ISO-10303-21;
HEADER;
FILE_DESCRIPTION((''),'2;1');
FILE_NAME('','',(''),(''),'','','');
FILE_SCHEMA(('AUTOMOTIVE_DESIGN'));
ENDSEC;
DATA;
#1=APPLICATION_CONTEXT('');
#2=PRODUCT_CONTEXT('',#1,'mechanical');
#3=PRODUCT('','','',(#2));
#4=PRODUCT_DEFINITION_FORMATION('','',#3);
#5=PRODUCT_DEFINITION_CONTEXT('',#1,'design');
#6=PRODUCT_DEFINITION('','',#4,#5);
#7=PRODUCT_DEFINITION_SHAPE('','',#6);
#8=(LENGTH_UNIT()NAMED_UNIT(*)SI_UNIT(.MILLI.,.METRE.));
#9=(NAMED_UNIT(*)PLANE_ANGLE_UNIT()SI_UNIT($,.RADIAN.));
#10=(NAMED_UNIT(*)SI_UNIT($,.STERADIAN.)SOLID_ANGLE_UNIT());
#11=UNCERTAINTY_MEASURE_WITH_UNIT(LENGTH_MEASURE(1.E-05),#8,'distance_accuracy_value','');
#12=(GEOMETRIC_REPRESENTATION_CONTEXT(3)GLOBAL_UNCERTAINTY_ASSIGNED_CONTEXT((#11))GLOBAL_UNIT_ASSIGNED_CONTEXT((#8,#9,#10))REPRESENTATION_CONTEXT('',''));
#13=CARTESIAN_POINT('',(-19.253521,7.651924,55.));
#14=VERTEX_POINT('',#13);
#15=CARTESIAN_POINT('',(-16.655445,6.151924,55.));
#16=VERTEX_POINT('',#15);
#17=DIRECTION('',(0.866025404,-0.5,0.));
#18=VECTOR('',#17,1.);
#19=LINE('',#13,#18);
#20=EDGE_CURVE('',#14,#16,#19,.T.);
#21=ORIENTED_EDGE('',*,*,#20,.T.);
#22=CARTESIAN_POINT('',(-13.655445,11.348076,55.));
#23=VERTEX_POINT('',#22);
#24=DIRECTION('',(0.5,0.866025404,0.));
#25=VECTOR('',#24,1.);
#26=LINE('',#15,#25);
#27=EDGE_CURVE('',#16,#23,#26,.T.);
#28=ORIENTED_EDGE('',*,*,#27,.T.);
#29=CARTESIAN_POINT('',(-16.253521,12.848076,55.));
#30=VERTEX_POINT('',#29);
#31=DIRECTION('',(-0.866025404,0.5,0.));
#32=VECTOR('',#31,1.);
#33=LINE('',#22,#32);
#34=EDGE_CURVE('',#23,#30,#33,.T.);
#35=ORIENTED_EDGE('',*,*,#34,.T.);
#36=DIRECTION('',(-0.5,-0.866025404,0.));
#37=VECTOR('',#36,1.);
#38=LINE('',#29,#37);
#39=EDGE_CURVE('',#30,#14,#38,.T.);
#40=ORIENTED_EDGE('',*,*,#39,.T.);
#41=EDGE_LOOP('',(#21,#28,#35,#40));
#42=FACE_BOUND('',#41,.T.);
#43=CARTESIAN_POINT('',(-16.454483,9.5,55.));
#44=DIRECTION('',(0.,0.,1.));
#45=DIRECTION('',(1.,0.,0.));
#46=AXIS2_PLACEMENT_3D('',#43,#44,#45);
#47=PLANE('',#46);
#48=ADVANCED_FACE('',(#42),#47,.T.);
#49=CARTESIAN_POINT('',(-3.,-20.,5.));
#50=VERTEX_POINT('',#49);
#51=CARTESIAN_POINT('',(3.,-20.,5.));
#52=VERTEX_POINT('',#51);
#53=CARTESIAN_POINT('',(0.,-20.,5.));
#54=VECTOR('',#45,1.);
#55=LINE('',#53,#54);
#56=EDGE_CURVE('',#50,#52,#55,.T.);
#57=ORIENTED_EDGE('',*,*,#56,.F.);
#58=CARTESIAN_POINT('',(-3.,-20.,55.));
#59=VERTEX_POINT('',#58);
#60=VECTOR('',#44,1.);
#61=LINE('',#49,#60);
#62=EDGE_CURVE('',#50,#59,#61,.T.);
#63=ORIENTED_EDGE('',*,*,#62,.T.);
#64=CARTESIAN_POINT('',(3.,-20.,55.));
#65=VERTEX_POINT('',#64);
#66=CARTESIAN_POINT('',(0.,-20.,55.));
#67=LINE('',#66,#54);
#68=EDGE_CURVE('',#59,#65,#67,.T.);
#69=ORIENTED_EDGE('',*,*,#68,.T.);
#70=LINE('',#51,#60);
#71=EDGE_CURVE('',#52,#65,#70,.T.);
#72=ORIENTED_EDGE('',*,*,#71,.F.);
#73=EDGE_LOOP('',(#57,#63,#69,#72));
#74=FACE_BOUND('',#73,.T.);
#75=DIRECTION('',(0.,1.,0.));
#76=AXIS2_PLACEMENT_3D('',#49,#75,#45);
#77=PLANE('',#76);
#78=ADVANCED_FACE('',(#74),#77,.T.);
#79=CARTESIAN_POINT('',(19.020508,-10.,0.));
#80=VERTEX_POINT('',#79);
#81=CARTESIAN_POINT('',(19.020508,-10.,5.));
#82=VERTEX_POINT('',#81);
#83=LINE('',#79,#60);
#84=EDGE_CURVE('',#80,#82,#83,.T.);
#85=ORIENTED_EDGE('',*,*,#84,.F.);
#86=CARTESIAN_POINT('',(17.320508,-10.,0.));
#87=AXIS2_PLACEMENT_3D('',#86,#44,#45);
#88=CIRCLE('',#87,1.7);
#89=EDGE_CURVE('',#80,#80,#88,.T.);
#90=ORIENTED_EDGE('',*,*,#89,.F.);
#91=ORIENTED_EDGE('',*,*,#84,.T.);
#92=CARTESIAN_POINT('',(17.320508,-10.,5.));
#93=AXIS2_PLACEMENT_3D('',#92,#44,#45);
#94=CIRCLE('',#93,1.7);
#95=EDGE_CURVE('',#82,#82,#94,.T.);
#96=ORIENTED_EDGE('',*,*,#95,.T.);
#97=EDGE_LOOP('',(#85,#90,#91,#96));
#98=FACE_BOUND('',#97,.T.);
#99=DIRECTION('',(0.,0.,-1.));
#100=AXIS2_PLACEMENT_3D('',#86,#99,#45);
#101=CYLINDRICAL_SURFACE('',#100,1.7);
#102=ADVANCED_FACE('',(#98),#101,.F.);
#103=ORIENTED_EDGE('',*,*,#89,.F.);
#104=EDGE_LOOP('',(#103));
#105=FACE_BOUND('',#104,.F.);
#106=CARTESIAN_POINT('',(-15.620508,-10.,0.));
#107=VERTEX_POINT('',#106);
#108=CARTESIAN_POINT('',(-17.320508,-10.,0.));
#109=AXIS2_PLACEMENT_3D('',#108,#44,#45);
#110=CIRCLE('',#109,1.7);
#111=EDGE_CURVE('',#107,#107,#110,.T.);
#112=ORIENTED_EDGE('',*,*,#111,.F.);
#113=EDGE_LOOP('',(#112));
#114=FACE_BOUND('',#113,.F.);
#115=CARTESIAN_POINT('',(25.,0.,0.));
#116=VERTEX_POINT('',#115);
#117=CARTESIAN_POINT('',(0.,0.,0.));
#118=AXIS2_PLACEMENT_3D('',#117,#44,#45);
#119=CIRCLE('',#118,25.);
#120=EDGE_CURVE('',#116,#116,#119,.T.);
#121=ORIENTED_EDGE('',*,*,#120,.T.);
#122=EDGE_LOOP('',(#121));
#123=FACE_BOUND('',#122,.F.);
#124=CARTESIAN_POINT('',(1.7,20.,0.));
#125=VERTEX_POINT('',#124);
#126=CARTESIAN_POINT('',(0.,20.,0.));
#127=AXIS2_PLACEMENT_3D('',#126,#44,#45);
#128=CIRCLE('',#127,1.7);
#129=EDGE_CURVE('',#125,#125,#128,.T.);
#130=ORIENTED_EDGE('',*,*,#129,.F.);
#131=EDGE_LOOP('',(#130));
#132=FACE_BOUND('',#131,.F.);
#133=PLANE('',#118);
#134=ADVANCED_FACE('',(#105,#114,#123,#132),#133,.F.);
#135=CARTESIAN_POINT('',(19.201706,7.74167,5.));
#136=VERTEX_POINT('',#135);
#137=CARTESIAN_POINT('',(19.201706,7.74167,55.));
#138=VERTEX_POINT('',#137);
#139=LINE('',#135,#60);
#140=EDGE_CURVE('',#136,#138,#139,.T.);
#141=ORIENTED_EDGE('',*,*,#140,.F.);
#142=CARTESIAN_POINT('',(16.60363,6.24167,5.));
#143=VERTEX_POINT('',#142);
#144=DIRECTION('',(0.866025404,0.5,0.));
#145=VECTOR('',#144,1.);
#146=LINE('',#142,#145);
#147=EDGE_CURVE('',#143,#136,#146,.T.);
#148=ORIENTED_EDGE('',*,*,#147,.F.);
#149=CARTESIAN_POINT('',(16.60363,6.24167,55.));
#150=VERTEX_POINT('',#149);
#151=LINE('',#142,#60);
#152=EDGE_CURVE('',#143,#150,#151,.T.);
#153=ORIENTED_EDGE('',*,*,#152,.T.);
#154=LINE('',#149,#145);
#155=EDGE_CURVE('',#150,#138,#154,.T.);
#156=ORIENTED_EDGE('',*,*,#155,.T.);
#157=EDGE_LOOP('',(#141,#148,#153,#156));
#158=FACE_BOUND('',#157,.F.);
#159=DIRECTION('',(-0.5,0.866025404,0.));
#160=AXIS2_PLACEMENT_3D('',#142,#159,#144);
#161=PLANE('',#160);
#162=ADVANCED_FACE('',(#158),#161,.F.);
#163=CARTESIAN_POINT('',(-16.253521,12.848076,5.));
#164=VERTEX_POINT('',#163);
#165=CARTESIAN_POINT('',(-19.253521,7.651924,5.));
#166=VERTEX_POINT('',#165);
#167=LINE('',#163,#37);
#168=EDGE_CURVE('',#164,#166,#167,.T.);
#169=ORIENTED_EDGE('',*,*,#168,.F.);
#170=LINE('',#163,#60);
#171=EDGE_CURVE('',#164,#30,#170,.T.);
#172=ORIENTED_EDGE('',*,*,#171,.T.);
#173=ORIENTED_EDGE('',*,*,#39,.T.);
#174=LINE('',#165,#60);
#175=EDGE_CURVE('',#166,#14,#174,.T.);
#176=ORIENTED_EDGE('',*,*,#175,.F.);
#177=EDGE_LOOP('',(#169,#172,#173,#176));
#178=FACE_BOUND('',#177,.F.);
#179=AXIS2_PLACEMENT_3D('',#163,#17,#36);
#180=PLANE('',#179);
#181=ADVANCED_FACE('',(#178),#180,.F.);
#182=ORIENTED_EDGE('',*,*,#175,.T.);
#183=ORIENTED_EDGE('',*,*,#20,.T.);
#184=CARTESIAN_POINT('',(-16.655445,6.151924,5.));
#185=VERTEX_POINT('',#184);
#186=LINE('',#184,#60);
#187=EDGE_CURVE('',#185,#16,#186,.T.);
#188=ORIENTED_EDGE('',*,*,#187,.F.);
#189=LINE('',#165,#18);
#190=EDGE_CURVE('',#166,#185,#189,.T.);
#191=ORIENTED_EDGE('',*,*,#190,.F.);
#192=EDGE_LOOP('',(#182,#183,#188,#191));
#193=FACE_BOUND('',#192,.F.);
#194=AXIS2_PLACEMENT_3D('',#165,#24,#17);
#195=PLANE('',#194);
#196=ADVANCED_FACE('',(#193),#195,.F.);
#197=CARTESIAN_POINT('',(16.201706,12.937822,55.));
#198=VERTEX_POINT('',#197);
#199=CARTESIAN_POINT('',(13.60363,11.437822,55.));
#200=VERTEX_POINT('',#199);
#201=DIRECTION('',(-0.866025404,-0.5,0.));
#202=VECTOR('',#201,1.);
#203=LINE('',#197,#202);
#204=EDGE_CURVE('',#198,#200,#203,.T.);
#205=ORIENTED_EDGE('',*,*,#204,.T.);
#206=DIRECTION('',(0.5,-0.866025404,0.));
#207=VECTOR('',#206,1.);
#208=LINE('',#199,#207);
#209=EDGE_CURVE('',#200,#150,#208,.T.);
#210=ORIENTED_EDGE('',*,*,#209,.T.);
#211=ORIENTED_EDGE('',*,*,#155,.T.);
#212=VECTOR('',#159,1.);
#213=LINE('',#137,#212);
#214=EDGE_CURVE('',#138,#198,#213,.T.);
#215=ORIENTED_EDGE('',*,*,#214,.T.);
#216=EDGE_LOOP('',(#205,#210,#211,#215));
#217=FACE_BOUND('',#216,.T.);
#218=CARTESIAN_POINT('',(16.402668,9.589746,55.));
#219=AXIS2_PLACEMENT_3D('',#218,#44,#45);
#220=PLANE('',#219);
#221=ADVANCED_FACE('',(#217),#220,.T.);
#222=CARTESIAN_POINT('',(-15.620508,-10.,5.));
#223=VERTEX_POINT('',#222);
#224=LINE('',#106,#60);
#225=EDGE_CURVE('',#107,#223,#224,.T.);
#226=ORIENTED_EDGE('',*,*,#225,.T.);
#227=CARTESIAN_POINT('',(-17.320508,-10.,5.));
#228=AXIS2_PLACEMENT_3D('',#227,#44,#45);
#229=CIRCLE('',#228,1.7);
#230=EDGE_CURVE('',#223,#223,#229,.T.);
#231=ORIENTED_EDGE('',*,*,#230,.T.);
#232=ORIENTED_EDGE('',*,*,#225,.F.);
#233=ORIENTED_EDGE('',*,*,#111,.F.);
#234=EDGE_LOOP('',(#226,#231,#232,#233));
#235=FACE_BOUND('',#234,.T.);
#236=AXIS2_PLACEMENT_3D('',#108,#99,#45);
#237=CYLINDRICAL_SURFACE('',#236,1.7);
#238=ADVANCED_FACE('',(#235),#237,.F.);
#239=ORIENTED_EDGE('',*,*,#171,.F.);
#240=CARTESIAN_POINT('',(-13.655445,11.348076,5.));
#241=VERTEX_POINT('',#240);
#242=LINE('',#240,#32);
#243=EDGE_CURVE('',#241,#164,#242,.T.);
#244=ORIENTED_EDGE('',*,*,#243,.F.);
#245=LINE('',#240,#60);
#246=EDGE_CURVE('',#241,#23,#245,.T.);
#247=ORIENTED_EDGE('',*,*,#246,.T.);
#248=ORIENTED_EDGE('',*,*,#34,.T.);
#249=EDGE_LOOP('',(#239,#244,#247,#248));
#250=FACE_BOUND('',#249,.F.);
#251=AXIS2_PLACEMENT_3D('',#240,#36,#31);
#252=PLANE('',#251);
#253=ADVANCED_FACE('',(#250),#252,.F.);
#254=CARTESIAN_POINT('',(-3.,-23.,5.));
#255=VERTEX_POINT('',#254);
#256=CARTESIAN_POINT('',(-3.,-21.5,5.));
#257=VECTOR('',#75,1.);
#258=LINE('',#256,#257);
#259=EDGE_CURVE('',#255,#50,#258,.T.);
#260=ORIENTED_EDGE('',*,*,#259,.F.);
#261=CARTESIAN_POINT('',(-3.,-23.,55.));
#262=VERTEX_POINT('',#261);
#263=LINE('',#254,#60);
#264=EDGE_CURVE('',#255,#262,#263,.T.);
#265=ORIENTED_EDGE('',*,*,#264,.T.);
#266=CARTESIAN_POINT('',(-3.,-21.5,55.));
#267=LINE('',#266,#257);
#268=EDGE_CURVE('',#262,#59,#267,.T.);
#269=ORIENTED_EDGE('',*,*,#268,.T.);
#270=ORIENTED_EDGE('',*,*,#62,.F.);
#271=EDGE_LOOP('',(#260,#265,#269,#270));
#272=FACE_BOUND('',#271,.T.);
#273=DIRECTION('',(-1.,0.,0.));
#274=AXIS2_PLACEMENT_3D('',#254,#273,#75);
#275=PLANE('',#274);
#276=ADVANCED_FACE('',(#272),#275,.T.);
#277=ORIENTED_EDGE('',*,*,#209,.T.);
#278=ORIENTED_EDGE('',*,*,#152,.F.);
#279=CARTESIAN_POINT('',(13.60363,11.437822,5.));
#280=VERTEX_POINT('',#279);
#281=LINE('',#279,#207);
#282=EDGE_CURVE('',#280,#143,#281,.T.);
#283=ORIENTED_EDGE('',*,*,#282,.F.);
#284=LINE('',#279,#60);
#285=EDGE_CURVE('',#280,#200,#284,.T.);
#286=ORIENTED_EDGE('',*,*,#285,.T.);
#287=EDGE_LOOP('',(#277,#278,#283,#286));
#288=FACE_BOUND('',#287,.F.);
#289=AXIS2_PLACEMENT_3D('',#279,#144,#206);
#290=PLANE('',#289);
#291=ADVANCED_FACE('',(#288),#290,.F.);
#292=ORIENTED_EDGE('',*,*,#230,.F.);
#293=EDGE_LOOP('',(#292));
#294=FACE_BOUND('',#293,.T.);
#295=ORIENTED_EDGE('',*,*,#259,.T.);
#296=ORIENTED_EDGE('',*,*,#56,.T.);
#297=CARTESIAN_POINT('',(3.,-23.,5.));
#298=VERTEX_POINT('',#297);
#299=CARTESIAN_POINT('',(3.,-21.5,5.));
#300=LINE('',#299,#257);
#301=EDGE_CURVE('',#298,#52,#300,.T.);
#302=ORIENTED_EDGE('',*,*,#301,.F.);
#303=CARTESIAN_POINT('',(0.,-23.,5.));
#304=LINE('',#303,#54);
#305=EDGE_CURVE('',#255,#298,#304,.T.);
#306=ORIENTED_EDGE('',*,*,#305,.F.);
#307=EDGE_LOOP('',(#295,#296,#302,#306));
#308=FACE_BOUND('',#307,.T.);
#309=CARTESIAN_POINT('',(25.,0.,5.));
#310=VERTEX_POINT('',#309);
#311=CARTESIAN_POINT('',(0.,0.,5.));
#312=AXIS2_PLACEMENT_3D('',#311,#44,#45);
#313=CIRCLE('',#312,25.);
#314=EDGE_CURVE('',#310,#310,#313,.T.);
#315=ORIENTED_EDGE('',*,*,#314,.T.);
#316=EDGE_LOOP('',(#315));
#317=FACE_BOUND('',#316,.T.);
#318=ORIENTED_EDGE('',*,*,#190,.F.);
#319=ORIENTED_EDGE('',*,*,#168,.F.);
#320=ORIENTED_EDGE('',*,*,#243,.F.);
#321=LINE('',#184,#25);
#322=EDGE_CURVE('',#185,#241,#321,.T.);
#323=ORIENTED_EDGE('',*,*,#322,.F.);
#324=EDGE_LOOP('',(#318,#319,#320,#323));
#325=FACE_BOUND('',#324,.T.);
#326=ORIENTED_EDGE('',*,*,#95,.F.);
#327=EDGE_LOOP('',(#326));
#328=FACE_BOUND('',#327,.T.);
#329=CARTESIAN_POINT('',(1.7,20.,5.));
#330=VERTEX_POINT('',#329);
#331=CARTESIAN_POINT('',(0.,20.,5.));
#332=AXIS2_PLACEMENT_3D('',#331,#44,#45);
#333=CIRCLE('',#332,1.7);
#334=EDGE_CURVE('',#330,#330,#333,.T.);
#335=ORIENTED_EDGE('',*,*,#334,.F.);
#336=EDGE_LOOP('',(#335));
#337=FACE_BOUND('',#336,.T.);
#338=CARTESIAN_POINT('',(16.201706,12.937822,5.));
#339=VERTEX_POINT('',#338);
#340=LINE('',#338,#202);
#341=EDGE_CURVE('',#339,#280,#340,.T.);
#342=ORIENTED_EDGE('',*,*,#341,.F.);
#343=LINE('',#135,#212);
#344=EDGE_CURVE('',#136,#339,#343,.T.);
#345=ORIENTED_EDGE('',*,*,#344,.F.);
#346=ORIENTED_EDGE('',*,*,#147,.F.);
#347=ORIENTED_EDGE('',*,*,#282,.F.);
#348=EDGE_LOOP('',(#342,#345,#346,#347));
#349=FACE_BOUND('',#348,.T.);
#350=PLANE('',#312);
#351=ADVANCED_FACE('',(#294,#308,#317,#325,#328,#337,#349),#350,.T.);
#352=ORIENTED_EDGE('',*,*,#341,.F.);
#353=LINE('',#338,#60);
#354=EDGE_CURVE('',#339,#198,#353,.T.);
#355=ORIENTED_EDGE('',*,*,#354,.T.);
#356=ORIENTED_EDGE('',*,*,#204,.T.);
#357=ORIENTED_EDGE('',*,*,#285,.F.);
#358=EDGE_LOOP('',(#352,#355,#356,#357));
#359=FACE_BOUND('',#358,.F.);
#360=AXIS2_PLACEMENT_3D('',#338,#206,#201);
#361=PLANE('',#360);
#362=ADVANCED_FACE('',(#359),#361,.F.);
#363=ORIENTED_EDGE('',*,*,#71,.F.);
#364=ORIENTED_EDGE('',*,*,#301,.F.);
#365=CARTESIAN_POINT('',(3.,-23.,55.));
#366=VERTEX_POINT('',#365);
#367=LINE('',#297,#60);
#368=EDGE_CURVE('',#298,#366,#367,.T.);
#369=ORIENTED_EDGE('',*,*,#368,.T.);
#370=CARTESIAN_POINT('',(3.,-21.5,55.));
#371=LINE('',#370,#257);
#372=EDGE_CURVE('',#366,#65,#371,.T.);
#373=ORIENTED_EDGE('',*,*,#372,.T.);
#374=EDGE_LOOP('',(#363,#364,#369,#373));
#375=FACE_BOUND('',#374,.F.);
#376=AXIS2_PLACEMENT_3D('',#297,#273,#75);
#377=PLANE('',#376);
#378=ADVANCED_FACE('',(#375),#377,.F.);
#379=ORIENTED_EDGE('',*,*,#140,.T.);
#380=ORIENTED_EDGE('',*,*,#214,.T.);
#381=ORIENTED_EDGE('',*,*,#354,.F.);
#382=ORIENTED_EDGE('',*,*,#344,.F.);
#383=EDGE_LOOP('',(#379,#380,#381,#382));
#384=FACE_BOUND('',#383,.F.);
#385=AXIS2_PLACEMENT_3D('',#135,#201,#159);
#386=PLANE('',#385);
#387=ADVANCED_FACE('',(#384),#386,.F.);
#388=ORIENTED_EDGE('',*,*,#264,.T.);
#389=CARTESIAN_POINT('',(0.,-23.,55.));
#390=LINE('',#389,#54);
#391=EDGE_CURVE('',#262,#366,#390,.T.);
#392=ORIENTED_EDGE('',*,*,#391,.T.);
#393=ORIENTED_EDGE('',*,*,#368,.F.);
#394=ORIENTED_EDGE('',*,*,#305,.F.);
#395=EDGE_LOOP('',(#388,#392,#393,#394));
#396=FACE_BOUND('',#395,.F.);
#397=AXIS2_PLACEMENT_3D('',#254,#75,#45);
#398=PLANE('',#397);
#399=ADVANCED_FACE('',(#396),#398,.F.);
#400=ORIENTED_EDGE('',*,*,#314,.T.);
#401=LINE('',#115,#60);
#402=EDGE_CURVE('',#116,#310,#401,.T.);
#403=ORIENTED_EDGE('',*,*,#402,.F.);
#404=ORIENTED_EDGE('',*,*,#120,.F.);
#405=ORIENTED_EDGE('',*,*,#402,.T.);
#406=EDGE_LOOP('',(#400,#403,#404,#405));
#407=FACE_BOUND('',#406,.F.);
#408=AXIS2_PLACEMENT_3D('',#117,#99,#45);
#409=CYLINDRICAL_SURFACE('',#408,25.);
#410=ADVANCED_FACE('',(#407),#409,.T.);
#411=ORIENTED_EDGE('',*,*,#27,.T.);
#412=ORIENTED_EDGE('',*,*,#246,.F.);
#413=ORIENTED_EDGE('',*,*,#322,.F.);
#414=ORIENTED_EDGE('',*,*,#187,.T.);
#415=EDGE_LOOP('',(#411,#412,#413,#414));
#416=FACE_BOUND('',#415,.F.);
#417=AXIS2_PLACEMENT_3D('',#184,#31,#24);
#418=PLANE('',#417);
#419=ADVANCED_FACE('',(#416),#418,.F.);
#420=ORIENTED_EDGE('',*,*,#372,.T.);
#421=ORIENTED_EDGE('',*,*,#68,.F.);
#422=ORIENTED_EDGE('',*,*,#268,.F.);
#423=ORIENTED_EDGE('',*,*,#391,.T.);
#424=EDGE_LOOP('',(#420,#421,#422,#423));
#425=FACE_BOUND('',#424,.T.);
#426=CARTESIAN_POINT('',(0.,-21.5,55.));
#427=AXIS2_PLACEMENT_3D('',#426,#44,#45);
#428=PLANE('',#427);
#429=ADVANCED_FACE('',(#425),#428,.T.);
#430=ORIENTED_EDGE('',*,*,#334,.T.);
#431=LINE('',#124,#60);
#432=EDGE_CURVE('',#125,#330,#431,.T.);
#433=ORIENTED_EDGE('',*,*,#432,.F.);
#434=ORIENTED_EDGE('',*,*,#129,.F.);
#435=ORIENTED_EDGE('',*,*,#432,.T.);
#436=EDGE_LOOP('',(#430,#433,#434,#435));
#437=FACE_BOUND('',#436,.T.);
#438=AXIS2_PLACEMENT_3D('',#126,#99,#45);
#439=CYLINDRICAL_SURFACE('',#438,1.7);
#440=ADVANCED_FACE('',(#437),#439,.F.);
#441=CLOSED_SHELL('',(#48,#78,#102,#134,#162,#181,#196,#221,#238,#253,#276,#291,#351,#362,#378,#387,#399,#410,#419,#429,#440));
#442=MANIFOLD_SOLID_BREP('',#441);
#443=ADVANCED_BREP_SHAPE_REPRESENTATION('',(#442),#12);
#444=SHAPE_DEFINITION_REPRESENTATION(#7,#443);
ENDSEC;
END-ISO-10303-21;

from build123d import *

# Parameters (mm, degrees)
F0_R     = 25
F0_R_2   = 1.7
F1_DEPTH = 5
F3_W     = 6
F3_H     = 3
F4_DEPTH = 50


# Not quite as in the source:
# - a feature names something its author has since deleted; it is built from what else it names


with BuildPart() as f1:
    # F0 (on Top) → F1 (new body)
    with BuildSketch(Plane.XY):
        Circle(F0_R)
        with Locations((-17.3205080757, -10)):
            Circle(F0_R_2, mode=Mode.SUBTRACT)
        with Locations((17.3205080757, -10)):
            Circle(F0_R_2, mode=Mode.SUBTRACT)
        with Locations((0, 20)):
            Circle(F0_R_2, mode=Mode.SUBTRACT)
    extrude(amount=F1_DEPTH)

    # F3 (on face) → F4 (join)
    with BuildSketch(Plane.XY.offset(5)):
        Polygon((-16.6554445662, 6.1519237886), (-13.6554445662, 11.3480762114), (-16.2535207776, 12.8480762114), (-19.2535207776, 7.6519237886), align=None)
        Polygon((16.2017059222, 12.9378221735), (13.6036297108, 11.4378221735), (16.6036297108, 6.2416697508), (19.2017059222, 7.7416697508), align=None)
        with Locations((0, -21.5)):
            Rectangle(F3_W, F3_H)
    extrude(amount=F4_DEPTH)


solid = f1.part
